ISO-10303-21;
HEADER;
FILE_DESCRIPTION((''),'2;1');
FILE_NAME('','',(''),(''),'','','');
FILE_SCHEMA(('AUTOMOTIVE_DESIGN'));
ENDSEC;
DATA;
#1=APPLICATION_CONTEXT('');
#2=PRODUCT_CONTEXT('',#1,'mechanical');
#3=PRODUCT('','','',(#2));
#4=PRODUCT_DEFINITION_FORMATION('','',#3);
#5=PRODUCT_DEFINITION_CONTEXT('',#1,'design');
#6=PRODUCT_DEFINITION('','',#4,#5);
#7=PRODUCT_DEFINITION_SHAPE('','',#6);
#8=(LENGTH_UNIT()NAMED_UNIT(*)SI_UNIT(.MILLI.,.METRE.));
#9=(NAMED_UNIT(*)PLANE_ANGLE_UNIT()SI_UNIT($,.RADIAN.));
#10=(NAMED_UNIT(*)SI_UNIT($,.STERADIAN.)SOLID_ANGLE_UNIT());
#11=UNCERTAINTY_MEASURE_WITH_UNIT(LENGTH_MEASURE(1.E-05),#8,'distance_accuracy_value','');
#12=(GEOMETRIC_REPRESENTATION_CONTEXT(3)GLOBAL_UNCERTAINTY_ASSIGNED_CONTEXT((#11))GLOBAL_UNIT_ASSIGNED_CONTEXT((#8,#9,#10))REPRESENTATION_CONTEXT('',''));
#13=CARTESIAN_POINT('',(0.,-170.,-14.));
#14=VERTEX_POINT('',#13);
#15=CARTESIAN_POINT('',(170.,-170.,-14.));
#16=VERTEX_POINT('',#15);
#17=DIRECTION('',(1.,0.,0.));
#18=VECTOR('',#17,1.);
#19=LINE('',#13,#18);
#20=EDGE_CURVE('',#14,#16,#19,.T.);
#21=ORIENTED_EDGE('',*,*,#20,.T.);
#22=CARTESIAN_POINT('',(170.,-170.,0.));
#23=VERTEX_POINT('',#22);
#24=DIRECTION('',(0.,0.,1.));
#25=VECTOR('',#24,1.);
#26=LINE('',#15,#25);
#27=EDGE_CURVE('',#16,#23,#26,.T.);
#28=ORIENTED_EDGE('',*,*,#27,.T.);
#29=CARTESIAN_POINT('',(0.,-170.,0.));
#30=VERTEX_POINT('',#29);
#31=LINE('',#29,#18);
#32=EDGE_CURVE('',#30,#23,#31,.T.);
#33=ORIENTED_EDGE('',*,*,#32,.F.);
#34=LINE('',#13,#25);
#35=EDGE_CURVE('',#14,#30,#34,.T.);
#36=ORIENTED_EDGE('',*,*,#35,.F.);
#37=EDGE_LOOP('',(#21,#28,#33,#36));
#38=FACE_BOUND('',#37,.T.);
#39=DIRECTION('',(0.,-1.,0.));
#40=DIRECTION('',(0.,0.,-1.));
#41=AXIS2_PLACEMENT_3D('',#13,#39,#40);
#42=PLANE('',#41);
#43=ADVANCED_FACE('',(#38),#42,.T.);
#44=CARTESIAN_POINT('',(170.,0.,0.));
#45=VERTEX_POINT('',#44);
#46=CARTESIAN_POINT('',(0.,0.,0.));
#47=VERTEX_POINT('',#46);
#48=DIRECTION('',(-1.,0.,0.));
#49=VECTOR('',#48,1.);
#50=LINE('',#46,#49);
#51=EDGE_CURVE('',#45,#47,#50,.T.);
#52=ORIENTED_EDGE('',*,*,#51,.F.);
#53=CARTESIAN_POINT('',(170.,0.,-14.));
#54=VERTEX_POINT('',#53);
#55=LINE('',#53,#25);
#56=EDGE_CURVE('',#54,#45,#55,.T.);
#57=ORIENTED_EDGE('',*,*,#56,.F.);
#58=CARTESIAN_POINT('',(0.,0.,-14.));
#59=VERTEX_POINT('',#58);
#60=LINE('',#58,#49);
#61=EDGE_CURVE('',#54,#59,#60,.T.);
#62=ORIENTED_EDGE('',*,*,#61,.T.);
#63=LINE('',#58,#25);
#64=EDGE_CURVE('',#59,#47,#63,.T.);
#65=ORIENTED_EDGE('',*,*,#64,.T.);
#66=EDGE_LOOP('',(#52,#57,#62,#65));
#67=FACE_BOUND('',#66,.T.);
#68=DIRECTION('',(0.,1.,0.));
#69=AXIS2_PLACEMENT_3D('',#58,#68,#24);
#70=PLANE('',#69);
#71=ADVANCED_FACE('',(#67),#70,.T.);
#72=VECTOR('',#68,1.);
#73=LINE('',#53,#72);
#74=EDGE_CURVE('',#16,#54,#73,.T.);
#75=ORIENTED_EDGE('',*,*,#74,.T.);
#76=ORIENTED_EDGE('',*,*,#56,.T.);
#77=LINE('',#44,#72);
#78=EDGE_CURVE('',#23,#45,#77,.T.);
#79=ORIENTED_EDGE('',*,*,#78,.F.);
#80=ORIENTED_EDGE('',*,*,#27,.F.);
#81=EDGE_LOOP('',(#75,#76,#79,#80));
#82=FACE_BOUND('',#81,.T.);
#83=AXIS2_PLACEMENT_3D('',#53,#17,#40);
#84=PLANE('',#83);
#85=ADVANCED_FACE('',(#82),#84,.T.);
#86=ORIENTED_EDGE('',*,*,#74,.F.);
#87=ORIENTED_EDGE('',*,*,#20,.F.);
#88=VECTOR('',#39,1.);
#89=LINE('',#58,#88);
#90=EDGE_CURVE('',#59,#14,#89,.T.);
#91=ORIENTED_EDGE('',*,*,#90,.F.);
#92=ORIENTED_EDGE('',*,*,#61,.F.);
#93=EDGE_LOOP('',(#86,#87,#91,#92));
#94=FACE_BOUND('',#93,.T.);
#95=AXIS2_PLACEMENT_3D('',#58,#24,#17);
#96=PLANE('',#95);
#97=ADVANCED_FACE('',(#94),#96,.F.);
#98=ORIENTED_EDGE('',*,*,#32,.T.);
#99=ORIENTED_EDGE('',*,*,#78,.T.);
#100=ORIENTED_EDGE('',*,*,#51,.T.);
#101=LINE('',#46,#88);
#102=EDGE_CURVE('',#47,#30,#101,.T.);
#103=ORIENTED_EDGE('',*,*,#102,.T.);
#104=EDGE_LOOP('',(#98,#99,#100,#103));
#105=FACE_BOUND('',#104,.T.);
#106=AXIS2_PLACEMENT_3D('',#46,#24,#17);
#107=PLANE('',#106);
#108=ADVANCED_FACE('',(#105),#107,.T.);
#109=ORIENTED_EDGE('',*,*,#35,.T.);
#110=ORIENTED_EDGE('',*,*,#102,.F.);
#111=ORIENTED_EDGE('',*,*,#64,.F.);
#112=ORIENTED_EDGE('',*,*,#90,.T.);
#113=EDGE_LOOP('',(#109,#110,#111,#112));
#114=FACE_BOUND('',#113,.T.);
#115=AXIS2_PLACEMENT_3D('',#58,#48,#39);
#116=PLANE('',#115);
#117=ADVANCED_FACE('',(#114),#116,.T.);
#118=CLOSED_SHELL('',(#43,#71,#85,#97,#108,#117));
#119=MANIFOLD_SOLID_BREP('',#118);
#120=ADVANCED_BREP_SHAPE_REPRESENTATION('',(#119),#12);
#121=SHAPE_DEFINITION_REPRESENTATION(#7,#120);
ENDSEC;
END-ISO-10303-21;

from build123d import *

# Parameters (mm, degrees)
SKETCH_1_W             = 170
SKETCH_1_H             = 170
SM_BASE_FLANGE_1_DEPTH = 14


# Sheet-metal steps are written as plain solids
with BuildPart() as part:
    # Sketch 1 → Базовая кромка1 (new body)
    with BuildSketch(Plane.XY):
        with Locations((85, -85)):
            Rectangle(SKETCH_1_W, SKETCH_1_H)
    extrude(amount=-SM_BASE_FLANGE_1_DEPTH)


solid = part.part
